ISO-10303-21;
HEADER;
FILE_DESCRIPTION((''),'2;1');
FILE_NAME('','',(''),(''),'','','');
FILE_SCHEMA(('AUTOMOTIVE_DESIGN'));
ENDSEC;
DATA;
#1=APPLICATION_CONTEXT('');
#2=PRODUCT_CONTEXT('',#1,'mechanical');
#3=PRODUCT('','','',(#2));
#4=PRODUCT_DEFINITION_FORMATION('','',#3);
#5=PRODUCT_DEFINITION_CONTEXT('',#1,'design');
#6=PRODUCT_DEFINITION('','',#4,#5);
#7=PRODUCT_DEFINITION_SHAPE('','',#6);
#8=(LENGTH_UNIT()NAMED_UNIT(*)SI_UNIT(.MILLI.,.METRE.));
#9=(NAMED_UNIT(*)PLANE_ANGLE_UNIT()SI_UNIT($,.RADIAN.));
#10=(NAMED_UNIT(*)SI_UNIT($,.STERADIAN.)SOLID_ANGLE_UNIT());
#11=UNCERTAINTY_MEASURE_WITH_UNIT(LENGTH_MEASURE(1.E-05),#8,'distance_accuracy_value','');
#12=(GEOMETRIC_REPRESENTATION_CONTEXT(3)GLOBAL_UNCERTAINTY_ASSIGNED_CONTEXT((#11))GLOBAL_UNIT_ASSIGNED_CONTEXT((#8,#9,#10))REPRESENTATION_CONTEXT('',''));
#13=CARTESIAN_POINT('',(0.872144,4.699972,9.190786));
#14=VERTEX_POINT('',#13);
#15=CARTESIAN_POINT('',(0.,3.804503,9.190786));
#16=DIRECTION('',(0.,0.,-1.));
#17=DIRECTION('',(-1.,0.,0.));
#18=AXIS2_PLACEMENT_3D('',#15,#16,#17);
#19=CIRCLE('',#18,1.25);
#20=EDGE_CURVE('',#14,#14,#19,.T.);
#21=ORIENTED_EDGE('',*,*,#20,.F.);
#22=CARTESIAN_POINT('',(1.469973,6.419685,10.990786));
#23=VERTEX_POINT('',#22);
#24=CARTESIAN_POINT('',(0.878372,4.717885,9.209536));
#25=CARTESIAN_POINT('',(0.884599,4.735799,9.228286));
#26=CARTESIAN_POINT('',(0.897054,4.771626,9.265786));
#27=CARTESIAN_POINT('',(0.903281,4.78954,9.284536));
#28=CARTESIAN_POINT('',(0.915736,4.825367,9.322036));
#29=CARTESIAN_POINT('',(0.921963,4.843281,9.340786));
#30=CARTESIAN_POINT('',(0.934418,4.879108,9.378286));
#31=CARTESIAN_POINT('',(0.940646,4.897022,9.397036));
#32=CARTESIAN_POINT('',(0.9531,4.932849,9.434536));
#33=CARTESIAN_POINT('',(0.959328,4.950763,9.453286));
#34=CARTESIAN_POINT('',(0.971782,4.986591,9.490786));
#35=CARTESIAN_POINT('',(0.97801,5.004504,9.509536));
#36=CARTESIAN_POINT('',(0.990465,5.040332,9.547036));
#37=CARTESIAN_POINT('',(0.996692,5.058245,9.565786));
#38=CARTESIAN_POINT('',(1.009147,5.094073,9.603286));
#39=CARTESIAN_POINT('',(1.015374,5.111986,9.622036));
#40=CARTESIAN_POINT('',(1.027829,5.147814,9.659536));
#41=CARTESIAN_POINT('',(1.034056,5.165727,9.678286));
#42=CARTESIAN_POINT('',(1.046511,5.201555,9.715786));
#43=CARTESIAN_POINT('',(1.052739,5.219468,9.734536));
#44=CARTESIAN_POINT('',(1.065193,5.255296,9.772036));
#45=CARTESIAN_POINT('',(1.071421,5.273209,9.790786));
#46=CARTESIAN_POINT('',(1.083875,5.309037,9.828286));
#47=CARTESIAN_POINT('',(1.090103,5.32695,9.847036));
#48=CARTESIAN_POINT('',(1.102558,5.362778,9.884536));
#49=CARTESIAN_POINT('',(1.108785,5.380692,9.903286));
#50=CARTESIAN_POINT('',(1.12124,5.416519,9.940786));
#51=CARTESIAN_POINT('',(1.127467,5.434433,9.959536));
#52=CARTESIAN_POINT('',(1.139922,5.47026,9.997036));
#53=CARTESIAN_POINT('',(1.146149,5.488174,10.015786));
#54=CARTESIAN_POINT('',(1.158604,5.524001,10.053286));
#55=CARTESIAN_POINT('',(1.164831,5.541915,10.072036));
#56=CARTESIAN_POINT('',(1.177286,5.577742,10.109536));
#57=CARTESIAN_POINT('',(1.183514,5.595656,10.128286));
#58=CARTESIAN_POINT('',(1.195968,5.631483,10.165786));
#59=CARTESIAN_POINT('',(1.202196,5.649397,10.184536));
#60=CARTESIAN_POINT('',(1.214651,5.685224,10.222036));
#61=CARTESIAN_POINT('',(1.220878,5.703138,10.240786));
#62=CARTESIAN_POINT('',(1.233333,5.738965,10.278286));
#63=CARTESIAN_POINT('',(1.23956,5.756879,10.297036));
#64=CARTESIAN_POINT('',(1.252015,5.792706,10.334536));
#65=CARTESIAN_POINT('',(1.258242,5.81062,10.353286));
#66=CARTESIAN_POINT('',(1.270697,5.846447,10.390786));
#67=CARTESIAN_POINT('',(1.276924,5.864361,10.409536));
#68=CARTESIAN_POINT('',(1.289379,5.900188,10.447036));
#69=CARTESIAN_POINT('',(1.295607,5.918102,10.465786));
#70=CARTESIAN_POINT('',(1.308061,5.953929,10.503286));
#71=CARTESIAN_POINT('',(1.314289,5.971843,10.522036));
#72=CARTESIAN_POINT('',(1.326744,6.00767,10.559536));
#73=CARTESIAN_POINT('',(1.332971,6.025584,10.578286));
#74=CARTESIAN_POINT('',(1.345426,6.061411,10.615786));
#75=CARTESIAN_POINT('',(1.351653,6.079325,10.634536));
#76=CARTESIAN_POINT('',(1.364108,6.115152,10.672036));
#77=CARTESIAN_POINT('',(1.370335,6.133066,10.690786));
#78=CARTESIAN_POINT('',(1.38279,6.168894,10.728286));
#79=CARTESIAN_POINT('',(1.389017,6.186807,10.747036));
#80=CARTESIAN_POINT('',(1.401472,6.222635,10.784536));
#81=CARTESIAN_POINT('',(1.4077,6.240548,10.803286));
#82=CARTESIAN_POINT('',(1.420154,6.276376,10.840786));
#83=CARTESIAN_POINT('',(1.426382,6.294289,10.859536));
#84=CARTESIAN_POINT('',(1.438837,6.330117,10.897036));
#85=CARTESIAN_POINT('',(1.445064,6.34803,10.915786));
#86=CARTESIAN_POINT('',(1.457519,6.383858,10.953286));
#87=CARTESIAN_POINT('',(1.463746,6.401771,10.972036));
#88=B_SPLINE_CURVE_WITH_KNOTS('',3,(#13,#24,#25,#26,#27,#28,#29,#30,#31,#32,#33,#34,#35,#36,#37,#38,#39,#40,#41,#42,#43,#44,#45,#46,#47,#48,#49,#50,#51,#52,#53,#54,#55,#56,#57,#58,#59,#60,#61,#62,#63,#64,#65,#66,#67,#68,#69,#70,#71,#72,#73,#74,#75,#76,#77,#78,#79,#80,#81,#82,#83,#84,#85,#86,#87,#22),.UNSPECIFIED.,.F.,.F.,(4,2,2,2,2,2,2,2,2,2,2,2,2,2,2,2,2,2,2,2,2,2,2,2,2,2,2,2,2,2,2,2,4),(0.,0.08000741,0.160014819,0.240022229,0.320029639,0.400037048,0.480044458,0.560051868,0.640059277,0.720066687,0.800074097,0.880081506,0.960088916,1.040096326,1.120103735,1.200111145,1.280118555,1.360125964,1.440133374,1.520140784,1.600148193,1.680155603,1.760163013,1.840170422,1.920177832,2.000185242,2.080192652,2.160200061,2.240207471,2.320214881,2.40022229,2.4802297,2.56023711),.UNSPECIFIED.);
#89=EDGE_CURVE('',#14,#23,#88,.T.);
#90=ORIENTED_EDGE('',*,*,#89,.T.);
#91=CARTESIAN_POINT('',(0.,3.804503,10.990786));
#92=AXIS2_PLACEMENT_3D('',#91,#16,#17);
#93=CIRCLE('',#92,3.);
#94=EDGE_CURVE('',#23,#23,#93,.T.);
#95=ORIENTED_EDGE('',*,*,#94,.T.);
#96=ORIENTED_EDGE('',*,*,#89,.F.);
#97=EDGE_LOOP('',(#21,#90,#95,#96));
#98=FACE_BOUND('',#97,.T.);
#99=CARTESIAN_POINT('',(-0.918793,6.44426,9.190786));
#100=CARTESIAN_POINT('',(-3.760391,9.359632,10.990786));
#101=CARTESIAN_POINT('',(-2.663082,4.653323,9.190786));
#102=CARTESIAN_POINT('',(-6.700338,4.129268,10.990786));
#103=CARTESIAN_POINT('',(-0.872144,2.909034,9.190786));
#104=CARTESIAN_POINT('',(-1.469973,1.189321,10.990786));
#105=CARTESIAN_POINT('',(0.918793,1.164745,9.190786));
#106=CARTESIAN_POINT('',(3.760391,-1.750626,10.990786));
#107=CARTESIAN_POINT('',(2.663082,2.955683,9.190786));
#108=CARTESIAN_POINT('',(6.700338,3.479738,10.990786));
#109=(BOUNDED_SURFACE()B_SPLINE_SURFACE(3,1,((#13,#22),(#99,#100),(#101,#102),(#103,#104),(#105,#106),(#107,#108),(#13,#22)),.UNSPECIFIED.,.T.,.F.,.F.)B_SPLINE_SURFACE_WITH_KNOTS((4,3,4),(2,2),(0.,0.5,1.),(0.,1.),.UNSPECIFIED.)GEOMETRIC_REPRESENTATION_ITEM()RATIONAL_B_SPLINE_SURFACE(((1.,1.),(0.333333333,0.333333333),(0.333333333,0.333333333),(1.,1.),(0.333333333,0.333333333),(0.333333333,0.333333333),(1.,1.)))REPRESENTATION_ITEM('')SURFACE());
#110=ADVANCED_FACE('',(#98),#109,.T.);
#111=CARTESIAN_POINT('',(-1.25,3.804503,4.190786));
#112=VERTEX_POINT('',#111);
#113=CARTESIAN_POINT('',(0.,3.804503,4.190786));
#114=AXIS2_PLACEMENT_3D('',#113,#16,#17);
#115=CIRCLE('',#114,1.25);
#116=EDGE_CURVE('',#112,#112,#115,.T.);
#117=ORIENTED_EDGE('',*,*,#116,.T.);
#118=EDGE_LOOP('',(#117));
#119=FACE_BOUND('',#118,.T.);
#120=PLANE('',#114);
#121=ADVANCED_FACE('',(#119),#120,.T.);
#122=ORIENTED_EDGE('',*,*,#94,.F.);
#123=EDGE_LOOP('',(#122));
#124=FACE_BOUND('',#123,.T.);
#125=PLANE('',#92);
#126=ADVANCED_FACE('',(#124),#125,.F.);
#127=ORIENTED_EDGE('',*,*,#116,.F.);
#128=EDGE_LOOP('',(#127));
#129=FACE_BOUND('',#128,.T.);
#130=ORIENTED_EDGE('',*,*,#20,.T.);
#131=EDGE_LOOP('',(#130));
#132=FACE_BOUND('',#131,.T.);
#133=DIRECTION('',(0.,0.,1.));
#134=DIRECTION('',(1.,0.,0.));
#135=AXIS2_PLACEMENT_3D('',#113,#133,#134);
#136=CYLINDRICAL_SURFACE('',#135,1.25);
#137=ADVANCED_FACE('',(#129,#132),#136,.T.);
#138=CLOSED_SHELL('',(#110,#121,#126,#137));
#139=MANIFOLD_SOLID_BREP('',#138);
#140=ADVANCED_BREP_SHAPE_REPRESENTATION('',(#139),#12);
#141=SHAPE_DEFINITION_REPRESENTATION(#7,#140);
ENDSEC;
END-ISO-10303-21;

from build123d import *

# Parameters (mm, degrees)
SZKIC6_R                    = 1.25
DODANIE_WYCI_GNI_CIE2_DEPTH = 5


with BuildPart() as part:
    # Wyciągnięcie po profilach1: read off the stored shape, not the designer's step
    # Wyciągnięcie po profilach1: loft between two sections, ruled curve by curve
    wyci_gni_cie_po_profilach1_from = [
        Edge.make_bspline([(0.872144306, 4.699971596, 9.190785956), (-0.918793224, 6.444260208, 9.190785956), (-2.663081836, 4.653322679, 9.190785956), (-0.872144306, 2.909034066, 9.190785956), (0.918793224, 1.164745453, 9.190785956), (2.663081836, 2.955682983, 9.190785956), (0.872144306, 4.699971596, 9.190785956)], [0, 0, 0, 0, 0.5, 0.5, 0.5, 1, 1, 1, 1], 3, [1, 0.333333333, 0.333333333, 1, 0.333333333, 0.333333333, 1]),
    ]
    wyci_gni_cie_po_profilach1_to = [
        Edge.make_bspline([(1.469973455, 6.41968505, 10.990785956), (-3.760390984, 9.35963196, 10.990785956), (-6.700337894, 4.129267521, 10.990785956), (-1.469973455, 1.189320611, 10.990785956), (3.760390984, -1.750626299, 10.990785956), (6.700337894, 3.479738141, 10.990785956), (1.469973455, 6.41968505, 10.990785956)], [0, 0, 0, 0, 0.5, 0.5, 0.5, 1, 1, 1, 1], 3, [1, 0.333333333, 0.333333333, 1, 0.333333333, 0.333333333, 1]),
    ]
    wyci_gni_cie_po_profilach1 = Solid(Shell([*[Face.make_surface_from_curves(wyci_gni_cie_po_profilach1_from[k], wyci_gni_cie_po_profilach1_to[k]) for k in range(1)], Face(Wire(wyci_gni_cie_po_profilach1_from)), Face(Wire(wyci_gni_cie_po_profilach1_to))]))
    add(wyci_gni_cie_po_profilach1)

    # Szkic6 → Dodanie-wyciągnięcie2 (add)
    with BuildSketch(Plane(origin=(0, 0, 9.190785956), x_dir=(-1, 0, 0), z_dir=(0, 0, -1))):
        with Locations(Location((0, 3.804502831, 0), (0, 0, 134.244))):
            Circle(SZKIC6_R)
    extrude(amount=DODANIE_WYCI_GNI_CIE2_DEPTH)


solid = part.part
